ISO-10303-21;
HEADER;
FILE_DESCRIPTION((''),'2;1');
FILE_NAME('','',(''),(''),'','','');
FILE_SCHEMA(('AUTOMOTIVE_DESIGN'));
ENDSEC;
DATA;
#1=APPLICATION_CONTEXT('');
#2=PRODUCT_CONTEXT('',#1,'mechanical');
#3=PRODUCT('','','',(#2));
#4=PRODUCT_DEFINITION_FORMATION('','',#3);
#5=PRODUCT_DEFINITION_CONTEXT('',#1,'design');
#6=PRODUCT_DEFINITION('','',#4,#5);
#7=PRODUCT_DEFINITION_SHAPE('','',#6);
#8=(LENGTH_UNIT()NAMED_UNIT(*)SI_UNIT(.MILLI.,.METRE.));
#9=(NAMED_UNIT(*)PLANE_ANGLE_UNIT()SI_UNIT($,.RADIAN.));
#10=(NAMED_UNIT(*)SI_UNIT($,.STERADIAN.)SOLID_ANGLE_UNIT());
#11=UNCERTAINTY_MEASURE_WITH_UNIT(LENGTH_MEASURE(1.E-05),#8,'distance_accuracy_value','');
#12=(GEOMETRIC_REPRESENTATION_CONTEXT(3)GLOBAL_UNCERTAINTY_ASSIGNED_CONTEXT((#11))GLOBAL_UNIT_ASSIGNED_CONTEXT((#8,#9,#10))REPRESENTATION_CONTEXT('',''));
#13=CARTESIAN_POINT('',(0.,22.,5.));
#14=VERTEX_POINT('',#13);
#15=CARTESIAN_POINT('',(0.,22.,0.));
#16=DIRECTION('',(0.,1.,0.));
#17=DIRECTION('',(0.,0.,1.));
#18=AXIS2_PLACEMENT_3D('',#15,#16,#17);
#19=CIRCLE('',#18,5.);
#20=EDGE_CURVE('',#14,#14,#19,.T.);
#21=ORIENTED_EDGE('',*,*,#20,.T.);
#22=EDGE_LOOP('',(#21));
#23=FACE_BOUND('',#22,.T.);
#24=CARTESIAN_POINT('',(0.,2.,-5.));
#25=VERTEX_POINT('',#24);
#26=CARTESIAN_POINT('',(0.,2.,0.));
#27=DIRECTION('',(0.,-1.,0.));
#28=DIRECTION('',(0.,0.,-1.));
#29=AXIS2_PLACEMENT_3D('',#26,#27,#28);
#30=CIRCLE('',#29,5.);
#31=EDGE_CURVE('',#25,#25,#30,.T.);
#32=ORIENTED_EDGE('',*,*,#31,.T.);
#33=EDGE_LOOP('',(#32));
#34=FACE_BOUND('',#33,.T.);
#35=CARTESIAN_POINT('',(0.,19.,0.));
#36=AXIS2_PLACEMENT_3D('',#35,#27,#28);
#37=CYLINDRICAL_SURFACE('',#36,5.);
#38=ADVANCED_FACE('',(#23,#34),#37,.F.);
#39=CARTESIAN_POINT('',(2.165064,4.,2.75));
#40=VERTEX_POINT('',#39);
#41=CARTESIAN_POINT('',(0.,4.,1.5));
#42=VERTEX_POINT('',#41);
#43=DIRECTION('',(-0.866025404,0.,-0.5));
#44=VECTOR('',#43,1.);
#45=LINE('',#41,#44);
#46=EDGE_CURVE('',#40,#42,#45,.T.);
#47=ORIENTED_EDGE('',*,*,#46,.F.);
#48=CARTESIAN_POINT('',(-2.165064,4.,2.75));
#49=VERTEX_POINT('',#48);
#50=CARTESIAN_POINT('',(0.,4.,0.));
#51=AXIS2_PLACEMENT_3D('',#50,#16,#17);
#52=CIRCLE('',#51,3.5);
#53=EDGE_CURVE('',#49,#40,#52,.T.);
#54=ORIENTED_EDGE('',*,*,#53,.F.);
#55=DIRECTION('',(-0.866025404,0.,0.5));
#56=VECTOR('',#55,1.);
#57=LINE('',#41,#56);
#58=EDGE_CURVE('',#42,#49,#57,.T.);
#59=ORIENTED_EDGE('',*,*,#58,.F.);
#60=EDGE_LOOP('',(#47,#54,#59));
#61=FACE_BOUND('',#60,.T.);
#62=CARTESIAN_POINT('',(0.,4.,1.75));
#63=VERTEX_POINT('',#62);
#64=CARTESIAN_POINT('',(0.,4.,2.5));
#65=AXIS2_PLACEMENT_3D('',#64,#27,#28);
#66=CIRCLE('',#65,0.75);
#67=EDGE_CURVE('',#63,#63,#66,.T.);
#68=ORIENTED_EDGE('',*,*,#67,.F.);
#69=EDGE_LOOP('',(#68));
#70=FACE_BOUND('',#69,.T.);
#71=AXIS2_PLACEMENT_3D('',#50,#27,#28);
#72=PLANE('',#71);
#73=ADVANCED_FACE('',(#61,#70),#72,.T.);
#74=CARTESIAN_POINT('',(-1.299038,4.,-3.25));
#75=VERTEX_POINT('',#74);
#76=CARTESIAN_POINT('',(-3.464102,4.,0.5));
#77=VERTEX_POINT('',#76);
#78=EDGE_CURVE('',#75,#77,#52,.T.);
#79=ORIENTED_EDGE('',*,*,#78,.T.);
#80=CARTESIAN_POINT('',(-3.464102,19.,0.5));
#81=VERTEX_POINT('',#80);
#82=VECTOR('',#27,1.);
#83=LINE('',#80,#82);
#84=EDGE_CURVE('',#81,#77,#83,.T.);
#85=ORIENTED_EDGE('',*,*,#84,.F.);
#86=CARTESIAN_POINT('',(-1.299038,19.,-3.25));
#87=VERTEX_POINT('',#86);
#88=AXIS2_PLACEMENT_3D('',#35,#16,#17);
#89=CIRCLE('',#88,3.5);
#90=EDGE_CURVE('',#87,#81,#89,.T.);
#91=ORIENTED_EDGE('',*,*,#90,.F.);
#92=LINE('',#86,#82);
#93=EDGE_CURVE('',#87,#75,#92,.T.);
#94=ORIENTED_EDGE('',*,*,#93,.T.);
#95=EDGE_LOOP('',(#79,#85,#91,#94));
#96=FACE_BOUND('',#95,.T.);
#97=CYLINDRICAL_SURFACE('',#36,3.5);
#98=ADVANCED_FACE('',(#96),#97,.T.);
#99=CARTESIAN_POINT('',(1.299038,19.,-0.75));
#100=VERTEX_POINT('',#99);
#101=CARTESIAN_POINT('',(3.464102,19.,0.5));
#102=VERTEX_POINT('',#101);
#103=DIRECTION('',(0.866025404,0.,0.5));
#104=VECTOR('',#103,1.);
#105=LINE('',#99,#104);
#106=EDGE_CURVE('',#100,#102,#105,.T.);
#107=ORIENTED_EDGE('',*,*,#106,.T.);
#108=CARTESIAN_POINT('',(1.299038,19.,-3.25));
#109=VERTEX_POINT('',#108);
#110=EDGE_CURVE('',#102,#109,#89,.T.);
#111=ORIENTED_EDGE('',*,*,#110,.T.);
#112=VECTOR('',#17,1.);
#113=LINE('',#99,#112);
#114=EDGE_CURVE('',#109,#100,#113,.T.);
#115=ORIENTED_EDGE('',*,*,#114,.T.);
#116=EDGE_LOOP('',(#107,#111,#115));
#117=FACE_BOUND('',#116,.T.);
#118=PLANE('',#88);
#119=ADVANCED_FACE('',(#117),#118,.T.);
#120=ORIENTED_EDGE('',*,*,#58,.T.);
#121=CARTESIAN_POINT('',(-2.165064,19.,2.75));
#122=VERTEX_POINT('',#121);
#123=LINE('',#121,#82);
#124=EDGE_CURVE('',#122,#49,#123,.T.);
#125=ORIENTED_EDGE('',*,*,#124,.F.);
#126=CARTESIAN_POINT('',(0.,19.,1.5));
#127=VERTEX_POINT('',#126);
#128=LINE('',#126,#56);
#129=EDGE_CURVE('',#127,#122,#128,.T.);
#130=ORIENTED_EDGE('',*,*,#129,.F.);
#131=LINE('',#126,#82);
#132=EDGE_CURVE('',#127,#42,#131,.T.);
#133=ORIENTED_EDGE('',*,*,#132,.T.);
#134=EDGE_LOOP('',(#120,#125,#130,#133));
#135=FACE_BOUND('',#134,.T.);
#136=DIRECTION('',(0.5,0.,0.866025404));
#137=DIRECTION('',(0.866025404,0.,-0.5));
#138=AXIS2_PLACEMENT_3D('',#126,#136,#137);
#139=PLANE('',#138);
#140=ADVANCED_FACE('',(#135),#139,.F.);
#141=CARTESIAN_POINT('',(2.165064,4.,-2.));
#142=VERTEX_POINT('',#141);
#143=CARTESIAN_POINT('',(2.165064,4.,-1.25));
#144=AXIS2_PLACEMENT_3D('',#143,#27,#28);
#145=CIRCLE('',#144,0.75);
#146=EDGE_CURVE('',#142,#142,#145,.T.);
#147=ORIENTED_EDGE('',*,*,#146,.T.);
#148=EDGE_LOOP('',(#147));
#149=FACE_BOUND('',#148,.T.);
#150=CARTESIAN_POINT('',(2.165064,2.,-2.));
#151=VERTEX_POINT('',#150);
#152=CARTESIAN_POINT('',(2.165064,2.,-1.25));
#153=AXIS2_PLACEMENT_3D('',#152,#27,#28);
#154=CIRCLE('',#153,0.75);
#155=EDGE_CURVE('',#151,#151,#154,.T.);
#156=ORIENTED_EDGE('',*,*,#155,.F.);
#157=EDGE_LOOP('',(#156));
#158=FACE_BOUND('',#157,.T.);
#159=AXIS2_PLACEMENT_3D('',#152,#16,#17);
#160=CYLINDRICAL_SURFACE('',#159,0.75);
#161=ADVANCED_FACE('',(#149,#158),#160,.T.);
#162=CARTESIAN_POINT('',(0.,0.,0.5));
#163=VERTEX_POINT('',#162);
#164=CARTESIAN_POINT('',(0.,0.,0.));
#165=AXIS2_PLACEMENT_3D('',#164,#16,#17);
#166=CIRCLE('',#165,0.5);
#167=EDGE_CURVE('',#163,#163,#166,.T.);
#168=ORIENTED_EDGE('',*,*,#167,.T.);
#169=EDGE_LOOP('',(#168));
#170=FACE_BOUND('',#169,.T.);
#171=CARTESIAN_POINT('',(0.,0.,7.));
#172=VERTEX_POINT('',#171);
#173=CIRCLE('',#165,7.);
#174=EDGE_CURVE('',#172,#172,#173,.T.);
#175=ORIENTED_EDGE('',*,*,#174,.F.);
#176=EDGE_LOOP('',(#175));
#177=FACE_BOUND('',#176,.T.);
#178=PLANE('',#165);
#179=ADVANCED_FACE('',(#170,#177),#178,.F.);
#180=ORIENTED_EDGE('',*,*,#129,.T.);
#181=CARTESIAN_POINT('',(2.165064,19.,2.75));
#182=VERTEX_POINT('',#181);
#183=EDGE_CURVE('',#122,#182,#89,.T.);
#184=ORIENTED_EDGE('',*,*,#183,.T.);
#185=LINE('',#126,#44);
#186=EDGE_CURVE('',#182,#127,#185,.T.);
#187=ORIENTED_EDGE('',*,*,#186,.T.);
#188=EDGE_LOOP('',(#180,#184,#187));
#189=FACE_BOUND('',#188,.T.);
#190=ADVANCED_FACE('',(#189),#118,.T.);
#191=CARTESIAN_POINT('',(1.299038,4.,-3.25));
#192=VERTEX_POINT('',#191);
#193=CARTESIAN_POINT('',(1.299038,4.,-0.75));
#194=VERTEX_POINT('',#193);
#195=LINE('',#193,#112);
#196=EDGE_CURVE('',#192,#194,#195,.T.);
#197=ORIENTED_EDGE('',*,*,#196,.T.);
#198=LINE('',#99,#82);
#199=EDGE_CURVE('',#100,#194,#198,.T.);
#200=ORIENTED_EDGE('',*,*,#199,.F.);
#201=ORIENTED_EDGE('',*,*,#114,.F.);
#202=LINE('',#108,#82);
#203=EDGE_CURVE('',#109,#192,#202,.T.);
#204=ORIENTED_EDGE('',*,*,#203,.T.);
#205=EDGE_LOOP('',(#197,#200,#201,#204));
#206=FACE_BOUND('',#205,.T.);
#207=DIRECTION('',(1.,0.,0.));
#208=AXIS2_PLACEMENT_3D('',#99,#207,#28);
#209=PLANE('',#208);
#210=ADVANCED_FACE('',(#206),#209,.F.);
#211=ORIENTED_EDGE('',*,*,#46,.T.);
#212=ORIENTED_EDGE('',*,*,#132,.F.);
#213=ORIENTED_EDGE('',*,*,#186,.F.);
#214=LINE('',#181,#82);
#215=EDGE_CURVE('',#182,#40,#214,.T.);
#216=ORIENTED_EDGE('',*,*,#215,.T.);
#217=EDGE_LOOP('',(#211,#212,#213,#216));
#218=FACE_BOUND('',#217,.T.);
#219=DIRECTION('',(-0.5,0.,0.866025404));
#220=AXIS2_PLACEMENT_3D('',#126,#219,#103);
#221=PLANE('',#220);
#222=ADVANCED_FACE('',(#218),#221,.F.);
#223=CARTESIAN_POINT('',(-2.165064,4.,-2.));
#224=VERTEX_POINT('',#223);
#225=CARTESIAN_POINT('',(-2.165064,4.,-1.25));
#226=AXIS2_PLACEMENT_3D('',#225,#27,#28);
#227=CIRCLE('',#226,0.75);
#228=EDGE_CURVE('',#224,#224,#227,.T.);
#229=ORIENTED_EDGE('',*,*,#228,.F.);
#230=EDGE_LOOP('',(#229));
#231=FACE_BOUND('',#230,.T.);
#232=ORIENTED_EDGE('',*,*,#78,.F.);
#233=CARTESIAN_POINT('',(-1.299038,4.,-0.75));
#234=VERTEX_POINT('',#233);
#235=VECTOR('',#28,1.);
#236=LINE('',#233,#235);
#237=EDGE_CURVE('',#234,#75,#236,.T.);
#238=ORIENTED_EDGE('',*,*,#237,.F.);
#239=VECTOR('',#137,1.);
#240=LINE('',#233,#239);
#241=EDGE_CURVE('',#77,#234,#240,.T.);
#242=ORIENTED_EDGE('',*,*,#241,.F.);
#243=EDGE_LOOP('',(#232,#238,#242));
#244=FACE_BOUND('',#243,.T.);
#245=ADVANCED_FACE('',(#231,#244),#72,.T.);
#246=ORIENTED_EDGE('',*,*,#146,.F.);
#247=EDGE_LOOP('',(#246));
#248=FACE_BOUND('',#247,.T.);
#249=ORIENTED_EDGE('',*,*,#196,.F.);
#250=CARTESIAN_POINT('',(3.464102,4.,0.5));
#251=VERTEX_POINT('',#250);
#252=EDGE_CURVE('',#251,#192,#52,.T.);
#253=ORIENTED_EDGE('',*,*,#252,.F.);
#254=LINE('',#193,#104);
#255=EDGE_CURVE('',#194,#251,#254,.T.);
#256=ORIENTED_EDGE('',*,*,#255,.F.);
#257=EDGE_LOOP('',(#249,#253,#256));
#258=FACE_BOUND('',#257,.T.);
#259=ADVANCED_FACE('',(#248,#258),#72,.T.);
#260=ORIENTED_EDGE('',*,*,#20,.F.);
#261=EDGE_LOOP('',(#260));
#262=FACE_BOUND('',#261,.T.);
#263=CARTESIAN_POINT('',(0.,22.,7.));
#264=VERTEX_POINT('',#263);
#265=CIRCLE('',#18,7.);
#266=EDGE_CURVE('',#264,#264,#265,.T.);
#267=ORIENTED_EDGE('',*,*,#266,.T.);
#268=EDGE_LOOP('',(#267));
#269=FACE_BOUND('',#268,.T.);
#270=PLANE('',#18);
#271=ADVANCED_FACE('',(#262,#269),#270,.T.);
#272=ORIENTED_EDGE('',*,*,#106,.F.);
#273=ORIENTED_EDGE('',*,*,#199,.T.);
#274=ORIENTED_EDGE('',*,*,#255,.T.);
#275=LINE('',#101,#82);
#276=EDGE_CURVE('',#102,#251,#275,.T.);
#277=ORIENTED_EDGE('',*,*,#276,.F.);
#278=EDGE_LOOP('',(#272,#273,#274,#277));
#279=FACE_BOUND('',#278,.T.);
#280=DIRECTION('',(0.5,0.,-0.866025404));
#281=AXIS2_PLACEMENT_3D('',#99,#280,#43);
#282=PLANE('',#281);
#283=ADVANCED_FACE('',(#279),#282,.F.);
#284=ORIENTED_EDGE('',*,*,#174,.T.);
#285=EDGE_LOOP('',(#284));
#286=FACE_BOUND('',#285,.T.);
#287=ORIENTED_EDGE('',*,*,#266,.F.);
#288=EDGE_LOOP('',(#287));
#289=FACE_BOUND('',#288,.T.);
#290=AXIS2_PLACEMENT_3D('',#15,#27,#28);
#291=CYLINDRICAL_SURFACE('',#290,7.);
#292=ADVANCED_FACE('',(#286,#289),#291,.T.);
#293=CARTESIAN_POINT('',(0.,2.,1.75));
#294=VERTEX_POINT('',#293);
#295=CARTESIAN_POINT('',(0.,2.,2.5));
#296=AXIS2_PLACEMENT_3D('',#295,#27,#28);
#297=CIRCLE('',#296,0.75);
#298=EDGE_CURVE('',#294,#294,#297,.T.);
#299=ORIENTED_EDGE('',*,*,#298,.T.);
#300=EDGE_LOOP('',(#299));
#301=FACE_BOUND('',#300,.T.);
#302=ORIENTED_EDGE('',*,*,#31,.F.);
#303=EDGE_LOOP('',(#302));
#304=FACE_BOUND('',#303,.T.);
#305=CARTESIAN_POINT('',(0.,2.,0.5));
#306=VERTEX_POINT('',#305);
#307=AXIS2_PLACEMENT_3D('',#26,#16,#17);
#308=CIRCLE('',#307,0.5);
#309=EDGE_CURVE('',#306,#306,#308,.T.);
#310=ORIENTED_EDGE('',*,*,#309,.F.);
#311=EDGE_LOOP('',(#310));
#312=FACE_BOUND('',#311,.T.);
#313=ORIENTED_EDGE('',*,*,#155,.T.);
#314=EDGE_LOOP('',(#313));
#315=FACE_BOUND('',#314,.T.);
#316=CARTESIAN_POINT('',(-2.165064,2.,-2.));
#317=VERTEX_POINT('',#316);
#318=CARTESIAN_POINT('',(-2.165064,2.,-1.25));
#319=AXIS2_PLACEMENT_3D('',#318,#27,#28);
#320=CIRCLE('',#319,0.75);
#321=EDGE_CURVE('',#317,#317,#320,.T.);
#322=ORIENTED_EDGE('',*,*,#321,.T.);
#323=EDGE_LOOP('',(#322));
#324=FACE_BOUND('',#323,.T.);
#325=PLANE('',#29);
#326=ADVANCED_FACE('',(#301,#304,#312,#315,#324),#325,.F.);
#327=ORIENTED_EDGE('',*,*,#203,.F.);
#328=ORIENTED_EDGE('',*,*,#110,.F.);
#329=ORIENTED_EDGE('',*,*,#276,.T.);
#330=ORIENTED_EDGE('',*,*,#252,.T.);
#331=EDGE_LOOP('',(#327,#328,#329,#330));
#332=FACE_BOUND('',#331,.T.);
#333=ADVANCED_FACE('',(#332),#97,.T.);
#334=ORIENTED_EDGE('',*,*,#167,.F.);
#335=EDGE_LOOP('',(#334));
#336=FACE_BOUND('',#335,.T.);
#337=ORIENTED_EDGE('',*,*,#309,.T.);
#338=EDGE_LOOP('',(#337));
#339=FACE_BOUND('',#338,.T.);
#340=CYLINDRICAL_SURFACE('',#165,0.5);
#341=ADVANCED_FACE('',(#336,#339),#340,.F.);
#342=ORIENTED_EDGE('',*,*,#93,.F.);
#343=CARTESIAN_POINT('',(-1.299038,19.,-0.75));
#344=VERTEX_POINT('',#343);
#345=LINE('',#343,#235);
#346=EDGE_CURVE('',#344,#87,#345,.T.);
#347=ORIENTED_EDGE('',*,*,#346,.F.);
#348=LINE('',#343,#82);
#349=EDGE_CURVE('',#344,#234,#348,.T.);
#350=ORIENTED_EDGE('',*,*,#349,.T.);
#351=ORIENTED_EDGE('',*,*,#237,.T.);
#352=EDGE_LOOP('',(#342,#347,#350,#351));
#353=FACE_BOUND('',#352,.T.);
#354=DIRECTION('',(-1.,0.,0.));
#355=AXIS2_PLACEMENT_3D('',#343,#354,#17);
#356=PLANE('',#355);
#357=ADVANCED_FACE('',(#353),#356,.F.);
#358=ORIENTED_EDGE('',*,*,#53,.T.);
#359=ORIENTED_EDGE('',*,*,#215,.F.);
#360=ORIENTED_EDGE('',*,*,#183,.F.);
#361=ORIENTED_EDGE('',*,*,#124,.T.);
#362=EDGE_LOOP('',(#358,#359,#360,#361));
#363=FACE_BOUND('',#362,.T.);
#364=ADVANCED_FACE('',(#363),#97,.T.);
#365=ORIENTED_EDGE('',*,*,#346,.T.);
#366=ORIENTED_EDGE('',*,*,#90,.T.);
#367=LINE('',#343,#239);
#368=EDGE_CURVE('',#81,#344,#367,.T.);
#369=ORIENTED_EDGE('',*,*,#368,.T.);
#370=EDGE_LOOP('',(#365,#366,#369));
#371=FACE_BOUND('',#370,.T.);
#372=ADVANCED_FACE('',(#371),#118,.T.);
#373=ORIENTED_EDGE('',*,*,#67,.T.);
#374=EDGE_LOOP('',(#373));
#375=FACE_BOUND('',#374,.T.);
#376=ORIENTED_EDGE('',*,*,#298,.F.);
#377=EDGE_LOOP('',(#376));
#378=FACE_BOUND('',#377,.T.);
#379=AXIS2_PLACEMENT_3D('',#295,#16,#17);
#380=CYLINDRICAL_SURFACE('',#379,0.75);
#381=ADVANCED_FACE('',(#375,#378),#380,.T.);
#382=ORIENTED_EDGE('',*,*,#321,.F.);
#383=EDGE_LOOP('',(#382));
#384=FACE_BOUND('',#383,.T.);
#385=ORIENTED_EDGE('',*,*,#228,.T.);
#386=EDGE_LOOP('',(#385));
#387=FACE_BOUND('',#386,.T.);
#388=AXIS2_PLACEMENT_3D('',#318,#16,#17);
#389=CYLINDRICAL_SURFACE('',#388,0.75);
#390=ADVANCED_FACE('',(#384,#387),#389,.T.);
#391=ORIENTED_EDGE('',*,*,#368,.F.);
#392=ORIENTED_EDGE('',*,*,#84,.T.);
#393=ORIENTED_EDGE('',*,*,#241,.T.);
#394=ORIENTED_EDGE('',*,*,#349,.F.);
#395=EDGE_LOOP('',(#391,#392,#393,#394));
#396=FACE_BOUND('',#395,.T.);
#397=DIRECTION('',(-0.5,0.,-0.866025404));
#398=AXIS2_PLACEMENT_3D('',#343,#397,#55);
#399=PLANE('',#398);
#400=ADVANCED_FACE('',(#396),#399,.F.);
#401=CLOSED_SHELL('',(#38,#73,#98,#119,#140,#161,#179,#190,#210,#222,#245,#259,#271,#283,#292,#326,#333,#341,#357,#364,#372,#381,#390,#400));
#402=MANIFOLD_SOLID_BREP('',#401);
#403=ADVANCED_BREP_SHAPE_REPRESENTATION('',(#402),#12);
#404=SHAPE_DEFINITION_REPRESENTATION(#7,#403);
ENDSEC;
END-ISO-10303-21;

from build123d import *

# Parameters (mm, degrees)
SKETCH1_R           = 7
BOSS_EXTRUDE1_DEPTH = 22
CAVITY1_START       = 2
CAVITY1_OUTLINE_R   = 5
CAVITY1_DEPTH       = 20
CAVITY1_START_2     = 19
CAVITY1_2_DEPTH     = 3
CAVITY1_3_OUTLINE_R = 0.75
CAVITY1_3_DEPTH     = 2
SKETCH2_R           = 0.5
CUT_EXTRUDE1_DEPTH  = 23.315913604


# Read off the part's stored shape, not the designer's step: Cavity1
with BuildPart() as part:
    # Sketch1 → Boss-Extrude1 (new body)
    with BuildSketch(Plane(origin=(0, 0, 0), x_dir=(1, 0, 0), z_dir=(0, 1, 0))):
        with Locations(Location((0, 0, 0), (0, 0, 270))):
            Circle(SKETCH1_R)
    extrude(amount=BOSS_EXTRUDE1_DEPTH)

    # Cavity1 outline → Cavity1 (cut)
    with BuildSketch(Plane(origin=(0, 0, 0), x_dir=(1, 0, 0), z_dir=(0, 1, 0)).offset(CAVITY1_START)):
        Circle(CAVITY1_OUTLINE_R)
        with BuildLine():
            Line((0, -1.5), (2.165063509, -2.75))
            ThreePointArc((2.165063509, -2.75), (0, -3.5), (-2.165063509, -2.75))
            Line((-2.165063509, -2.75), (0, -1.5))
        make_face(mode=Mode.SUBTRACT)
        with BuildLine():
            Line((-1.299038106, 0.75), (-3.464101615, -0.5))
            ThreePointArc((-3.464101615, -0.5), (-3.031088913, 1.75), (-1.299038106, 3.25))
            Line((-1.299038106, 3.25), (-1.299038106, 0.75))
        make_face(mode=Mode.SUBTRACT)
        with BuildLine():
            Line((3.464101615, -0.5), (1.299038106, 0.75))
            Line((1.299038106, 0.75), (1.299038106, 3.25))
            ThreePointArc((1.299038106, 3.25), (3.031088913, 1.75), (3.464101615, -0.5))
        make_face(mode=Mode.SUBTRACT)
    extrude(amount=CAVITY1_DEPTH, mode=Mode.SUBTRACT)

    # Cavity1 2 outline → Cavity1 2 (cut)
    with BuildSketch(Plane(origin=(0, 0, 0), x_dir=(1, 0, 0), z_dir=(0, 1, 0)).offset(CAVITY1_START_2)):
        with BuildLine():
            Line((1.299038106, 3.25), (1.299038106, 0.75))
            Line((1.299038106, 0.75), (3.464101615, -0.5))
            ThreePointArc((3.464101615, -0.5), (3.031088913, 1.75), (1.299038106, 3.25))
        make_face()
        with BuildLine():
            ThreePointArc((-1.299038106, 3.25), (-3.031088913, 1.75), (-3.464101615, -0.5))
            Line((-3.464101615, -0.5), (-1.299038106, 0.75))
            Line((-1.299038106, 0.75), (-1.299038106, 3.25))
        make_face()
        with BuildLine():
            ThreePointArc((-2.165063509, -2.75), (0, -3.5), (2.165063509, -2.75))
            Line((2.165063509, -2.75), (0, -1.5))
            Line((0, -1.5), (-2.165063509, -2.75))
        make_face()
    extrude(amount=CAVITY1_2_DEPTH, mode=Mode.SUBTRACT)

    # Cavity1 3 outline → Cavity1 3 (cut)
    # profile 1 of 3: a face of its own
    with BuildSketch(Plane(origin=(0, 0, 0), x_dir=(1, 0, 0), z_dir=(0, 1, 0)).offset(CAVITY1_START)):
        with BuildLine():
            Line((1.299038106, 3.25), (1.299038106, 0.75))
            Line((1.299038106, 0.75), (3.464101615, -0.5))
            ThreePointArc((3.464101615, -0.5), (3.031088913, 1.75), (1.299038106, 3.25))
        make_face()
        with Locations((2.165063509, 1.25)):
            Circle(CAVITY1_3_OUTLINE_R, mode=Mode.SUBTRACT)
    # profile 2 of 3: a face of its own
    with BuildSketch(Plane(origin=(0, 0, 0), x_dir=(1, 0, 0), z_dir=(0, 1, 0)).offset(CAVITY1_START)):
        with BuildLine():
            ThreePointArc((-1.299038106, 3.25), (-3.031088913, 1.75), (-3.464101615, -0.5))
            Line((-3.464101615, -0.5), (-1.299038106, 0.75))
            Line((-1.299038106, 0.75), (-1.299038106, 3.25))
        make_face()
        with Locations((-2.165063509, 1.25)):
            Circle(CAVITY1_3_OUTLINE_R, mode=Mode.SUBTRACT)
    # profile 3 of 3: a face of its own
    with BuildSketch(Plane(origin=(0, 0, 0), x_dir=(1, 0, 0), z_dir=(0, 1, 0)).offset(CAVITY1_START)):
        with BuildLine():
            ThreePointArc((-2.165063509, -2.75), (0, -3.5), (2.165063509, -2.75))
            Line((2.165063509, -2.75), (0, -1.5))
            Line((0, -1.5), (-2.165063509, -2.75))
        make_face()
        with Locations((0, -2.5)):
            Circle(CAVITY1_3_OUTLINE_R, mode=Mode.SUBTRACT)
    extrude(amount=CAVITY1_3_DEPTH, mode=Mode.SUBTRACT)

    # Sketch2 → Cut-Extrude1 (cut, through all)
    with BuildSketch(Plane(origin=(0, 2, 0), x_dir=(1, 0, 0), z_dir=(0, 1, 0))):
        with Locations(Location((0, 0, 0), (0, 0, 270))):
            Circle(SKETCH2_R)
    extrude(amount=-CUT_EXTRUDE1_DEPTH, mode=Mode.SUBTRACT)


solid = part.part
